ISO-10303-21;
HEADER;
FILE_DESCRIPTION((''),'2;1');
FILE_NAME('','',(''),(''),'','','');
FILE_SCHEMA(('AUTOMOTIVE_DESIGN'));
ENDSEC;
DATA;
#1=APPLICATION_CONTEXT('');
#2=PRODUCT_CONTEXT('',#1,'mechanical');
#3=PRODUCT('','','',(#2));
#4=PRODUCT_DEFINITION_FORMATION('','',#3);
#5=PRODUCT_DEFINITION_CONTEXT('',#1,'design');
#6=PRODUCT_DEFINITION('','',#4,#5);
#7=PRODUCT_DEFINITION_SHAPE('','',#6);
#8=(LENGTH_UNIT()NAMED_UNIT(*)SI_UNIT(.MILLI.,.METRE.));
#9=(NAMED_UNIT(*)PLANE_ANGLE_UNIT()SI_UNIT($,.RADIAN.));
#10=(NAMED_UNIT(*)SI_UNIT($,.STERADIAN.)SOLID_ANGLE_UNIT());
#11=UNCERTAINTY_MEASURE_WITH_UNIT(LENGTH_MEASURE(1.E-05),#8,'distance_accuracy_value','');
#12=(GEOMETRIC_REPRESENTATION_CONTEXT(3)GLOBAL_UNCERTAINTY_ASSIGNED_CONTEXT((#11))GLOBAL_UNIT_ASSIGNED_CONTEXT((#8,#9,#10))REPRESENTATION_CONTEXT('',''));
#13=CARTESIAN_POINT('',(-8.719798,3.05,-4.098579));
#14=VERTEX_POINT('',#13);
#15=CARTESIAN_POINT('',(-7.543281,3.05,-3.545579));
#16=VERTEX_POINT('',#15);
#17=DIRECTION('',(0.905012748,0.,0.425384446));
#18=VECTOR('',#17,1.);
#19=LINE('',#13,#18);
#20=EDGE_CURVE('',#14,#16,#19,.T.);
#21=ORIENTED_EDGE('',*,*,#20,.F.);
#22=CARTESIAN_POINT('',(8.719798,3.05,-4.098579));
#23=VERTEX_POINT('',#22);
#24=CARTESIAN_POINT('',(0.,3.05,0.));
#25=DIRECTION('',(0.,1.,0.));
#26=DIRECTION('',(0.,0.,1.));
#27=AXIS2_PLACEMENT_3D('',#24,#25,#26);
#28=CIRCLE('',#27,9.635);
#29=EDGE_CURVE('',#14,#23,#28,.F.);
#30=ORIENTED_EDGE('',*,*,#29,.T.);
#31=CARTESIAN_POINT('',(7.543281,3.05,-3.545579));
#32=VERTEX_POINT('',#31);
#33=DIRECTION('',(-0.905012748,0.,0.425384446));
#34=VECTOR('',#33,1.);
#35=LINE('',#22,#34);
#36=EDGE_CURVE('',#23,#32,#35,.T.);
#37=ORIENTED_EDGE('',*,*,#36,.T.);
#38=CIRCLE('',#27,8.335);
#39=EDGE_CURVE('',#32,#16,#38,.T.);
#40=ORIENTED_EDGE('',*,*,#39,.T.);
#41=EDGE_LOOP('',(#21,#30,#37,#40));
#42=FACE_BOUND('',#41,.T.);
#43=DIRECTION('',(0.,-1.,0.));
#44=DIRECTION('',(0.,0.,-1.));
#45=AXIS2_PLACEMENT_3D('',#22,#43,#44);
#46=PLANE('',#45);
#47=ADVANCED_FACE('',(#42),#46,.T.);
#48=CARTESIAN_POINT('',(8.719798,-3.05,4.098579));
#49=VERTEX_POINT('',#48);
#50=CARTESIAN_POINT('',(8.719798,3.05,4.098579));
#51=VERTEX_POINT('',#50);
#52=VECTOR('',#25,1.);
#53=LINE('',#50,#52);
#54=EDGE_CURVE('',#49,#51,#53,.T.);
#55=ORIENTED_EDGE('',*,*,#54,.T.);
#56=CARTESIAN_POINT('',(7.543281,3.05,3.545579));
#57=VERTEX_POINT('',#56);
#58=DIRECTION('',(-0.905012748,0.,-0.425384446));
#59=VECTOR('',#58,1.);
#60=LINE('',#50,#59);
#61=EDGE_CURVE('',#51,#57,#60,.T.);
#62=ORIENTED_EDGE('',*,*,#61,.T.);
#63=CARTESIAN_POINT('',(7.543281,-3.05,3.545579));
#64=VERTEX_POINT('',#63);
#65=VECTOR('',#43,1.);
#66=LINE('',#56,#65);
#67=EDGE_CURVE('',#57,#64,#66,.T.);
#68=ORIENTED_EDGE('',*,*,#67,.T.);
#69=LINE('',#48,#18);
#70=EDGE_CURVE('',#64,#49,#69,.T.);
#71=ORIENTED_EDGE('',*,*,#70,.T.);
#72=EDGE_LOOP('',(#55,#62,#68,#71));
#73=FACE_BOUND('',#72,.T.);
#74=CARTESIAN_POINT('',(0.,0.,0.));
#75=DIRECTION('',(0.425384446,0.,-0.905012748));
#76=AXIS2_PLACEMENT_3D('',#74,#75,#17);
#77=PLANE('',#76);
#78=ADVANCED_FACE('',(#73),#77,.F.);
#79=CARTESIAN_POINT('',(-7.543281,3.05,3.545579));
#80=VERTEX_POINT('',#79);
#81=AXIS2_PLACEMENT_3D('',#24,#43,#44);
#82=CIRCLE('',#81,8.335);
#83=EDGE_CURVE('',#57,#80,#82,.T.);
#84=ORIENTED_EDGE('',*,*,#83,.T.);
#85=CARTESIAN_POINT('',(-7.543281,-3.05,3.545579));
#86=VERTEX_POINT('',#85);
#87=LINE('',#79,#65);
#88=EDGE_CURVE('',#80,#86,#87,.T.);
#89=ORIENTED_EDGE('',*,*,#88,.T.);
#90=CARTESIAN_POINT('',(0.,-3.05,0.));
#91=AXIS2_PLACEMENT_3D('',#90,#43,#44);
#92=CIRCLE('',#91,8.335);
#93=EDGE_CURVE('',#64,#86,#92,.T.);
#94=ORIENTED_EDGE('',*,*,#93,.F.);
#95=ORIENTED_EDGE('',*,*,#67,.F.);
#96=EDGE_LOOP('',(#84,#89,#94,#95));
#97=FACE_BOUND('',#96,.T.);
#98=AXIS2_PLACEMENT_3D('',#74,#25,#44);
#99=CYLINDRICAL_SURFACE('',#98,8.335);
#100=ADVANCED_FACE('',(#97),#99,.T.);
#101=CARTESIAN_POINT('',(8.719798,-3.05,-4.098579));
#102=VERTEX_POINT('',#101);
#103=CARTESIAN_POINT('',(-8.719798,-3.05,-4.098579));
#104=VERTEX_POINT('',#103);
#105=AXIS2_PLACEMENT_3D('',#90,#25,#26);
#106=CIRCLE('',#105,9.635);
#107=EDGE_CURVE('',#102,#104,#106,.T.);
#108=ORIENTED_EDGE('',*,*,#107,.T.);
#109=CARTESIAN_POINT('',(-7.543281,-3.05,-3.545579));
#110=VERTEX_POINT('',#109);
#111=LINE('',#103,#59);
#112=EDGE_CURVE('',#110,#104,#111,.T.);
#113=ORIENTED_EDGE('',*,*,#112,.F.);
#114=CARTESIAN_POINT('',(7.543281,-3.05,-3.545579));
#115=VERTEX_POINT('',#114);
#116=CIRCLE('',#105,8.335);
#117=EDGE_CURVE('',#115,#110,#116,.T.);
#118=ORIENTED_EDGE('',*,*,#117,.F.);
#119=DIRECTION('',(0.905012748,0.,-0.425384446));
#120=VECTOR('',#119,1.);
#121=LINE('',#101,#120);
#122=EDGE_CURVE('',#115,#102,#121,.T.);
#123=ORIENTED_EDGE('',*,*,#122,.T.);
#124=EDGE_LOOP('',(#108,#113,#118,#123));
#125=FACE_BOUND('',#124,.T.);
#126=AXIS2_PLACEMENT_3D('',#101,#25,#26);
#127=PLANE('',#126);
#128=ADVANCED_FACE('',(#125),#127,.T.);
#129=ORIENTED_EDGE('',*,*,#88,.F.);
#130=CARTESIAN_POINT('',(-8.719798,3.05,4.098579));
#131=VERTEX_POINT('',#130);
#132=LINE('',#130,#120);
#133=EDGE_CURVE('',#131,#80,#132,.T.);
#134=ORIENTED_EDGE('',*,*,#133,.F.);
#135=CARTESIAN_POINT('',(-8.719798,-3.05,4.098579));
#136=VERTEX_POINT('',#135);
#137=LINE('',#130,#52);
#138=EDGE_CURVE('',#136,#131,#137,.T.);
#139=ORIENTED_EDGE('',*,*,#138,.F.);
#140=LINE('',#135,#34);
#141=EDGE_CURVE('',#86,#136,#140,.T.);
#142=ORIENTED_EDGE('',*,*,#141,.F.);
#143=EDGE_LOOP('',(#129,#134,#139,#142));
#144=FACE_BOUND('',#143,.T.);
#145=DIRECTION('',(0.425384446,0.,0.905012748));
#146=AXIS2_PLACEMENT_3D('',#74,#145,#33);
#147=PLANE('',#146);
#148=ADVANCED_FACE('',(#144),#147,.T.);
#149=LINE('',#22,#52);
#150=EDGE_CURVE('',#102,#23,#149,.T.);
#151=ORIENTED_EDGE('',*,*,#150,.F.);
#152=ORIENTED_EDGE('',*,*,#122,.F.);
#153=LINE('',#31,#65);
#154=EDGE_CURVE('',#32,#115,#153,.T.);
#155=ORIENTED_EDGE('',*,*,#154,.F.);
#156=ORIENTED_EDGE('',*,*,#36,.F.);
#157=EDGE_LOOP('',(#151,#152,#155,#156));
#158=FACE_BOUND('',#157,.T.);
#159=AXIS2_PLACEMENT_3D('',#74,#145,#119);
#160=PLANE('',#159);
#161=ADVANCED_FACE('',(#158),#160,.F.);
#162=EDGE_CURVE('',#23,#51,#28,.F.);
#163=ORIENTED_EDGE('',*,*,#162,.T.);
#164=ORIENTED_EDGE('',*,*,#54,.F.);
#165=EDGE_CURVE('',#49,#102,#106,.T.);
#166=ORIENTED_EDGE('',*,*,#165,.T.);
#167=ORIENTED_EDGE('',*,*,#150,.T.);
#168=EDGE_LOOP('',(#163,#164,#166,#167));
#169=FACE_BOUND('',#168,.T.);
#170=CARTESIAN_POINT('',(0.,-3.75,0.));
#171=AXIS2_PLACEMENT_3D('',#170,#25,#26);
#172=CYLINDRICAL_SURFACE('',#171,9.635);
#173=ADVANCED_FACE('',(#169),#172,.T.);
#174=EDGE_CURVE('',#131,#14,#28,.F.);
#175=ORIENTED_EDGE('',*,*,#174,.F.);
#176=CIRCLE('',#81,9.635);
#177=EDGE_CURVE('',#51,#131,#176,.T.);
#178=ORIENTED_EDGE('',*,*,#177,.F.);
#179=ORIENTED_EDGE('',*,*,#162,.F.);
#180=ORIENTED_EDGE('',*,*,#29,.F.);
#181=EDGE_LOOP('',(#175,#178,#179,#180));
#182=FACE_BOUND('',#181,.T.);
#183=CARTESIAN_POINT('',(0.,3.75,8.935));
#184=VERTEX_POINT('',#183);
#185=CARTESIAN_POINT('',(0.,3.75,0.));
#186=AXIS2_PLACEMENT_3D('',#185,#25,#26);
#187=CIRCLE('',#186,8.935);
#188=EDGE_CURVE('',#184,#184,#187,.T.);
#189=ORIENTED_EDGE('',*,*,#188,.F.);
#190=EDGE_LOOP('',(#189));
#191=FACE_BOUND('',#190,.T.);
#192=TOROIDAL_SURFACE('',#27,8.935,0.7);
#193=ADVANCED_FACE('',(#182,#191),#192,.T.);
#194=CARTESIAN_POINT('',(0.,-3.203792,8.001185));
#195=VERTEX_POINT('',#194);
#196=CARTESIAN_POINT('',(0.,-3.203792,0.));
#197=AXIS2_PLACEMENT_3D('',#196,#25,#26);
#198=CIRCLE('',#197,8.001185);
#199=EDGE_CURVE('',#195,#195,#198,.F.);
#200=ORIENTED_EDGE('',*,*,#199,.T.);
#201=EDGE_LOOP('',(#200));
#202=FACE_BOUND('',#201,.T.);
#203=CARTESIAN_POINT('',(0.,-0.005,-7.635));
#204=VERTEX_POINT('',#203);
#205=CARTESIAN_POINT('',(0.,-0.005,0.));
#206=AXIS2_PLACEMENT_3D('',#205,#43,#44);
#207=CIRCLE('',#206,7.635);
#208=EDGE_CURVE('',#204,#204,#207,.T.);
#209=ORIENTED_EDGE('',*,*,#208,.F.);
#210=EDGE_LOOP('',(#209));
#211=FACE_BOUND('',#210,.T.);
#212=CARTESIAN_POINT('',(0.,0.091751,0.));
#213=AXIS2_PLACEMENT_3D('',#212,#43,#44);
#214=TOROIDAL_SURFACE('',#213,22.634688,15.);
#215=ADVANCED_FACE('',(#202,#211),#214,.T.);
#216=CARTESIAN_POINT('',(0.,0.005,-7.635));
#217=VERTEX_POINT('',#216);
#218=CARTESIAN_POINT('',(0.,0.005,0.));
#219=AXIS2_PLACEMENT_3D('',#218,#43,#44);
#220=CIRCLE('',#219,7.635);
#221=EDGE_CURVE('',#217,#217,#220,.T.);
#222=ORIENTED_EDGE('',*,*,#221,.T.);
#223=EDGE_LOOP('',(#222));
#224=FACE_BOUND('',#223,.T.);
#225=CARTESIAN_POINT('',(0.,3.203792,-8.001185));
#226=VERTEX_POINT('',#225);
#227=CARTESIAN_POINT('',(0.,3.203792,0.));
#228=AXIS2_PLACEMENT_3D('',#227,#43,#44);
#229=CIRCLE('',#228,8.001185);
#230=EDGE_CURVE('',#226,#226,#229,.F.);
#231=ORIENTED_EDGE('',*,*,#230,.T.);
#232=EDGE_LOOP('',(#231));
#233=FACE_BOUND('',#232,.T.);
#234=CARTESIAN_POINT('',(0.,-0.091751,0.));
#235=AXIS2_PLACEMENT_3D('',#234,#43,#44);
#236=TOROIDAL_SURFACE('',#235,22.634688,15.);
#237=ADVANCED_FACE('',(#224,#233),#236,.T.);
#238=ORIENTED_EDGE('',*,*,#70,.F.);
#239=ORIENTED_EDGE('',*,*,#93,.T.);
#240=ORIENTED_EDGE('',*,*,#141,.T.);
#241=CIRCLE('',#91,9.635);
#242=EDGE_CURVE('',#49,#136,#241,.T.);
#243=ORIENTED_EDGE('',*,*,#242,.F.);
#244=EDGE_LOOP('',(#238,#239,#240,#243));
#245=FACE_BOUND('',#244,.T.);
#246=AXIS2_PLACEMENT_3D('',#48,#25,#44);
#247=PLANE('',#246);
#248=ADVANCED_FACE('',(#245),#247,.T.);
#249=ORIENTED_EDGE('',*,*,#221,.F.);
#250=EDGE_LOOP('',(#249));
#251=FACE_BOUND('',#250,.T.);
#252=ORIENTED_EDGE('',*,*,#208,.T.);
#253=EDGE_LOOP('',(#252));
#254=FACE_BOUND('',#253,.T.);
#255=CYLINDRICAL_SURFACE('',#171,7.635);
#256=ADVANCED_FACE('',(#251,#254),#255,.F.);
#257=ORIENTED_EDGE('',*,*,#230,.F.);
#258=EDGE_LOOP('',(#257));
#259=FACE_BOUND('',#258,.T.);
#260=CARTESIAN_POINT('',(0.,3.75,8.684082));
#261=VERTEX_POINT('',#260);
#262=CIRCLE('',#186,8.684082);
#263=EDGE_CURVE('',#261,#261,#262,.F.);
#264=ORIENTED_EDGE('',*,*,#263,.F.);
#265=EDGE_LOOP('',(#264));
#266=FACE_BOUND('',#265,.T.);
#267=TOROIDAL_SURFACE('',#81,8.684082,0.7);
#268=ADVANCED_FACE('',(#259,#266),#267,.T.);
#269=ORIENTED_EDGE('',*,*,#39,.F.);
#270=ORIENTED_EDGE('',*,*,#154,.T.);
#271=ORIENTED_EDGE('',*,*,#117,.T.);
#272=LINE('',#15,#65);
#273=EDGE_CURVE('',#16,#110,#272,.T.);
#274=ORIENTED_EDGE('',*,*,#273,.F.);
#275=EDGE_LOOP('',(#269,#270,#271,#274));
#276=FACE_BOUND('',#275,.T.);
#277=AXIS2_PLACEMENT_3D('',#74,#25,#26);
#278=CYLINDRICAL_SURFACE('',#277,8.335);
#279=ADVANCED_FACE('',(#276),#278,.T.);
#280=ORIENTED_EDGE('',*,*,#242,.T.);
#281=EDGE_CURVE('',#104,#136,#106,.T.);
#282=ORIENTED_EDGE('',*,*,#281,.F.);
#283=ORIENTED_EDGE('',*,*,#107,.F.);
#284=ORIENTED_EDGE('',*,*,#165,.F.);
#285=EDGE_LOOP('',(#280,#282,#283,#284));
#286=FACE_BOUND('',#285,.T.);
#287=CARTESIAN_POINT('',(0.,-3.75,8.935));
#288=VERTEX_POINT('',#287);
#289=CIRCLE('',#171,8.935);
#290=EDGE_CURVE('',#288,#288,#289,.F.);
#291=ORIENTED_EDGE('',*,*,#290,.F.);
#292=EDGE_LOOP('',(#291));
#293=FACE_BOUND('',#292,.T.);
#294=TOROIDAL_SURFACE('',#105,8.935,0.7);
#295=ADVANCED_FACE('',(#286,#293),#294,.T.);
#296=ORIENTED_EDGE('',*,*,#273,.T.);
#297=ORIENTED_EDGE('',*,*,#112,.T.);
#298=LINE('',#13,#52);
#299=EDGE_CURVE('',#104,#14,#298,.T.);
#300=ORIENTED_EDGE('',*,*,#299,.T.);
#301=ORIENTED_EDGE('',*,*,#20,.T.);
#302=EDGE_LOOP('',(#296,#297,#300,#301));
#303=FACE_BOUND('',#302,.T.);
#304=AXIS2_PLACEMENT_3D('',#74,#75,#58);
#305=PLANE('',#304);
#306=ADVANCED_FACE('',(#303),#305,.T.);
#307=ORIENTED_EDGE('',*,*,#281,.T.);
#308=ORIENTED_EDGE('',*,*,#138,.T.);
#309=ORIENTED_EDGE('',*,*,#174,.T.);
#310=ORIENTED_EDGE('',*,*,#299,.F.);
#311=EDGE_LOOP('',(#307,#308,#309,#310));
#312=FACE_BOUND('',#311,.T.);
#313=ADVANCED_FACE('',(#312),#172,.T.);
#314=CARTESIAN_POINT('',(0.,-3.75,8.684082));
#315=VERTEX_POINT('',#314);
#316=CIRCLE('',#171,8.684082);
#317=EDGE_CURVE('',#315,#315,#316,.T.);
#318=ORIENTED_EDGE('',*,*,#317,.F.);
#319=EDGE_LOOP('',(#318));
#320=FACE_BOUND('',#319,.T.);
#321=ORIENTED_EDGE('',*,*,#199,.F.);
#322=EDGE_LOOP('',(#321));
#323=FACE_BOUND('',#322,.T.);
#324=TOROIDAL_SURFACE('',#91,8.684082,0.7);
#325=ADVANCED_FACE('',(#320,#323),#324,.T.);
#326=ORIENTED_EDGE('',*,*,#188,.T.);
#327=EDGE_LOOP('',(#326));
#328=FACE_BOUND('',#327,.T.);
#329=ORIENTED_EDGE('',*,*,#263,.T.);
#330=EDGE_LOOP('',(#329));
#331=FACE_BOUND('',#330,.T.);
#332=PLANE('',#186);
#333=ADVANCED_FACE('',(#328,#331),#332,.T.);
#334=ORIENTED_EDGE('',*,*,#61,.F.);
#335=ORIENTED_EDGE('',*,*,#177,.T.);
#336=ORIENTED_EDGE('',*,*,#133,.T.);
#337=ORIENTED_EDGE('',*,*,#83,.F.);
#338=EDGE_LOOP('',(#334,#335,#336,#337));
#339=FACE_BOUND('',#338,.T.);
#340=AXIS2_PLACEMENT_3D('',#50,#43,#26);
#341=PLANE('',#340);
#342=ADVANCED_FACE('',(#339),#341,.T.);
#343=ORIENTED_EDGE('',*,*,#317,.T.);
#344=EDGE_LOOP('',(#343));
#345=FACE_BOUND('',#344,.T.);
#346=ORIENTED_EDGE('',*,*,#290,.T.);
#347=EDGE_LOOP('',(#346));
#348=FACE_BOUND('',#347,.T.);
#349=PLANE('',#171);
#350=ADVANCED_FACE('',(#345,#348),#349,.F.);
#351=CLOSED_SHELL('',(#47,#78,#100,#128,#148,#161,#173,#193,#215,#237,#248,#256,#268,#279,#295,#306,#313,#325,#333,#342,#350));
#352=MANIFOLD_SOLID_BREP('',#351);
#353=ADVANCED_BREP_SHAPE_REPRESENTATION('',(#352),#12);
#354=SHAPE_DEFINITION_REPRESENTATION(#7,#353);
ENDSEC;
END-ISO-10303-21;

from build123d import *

# Parameters (mm, degrees)
BOSS_EXTRUDE1_DEPTH      = 3.75
BOSS_EXTRUDE1_DEPTH_BACK = 3.75
SKETCH1_R                = 9.635
SKETCH1_R_2              = 7.635
FILLET1_R                = 0.7
FILLET3_R                = 0.7
CUT_REVOLVE2_START       = -3.05
CUT_REVOLVE2_DEPTH       = 6.1


# Read off the part's stored shape, not the designer's step: Cut-Revolve2
with BuildPart() as part:
    # Sketch1 → Boss-Extrude1 (new, two sides: drawn at the far end of the back side and taken through both)
    with BuildSketch(Plane(origin=(0, 0, 0), x_dir=(1, 0, 0), z_dir=(0, 1, 0)).offset(-BOSS_EXTRUDE1_DEPTH_BACK)):
        with Locations(Location((0, 0, 0), (0, 0, 270))):
            Circle(SKETCH1_R)
        with Locations(Location((0, 0, 0), (0, 0, 270))):
            Circle(SKETCH1_R_2, mode=Mode.SUBTRACT)
    extrude(amount=BOSS_EXTRUDE1_DEPTH + BOSS_EXTRUDE1_DEPTH_BACK)

    # Fillet1
    fillet1_edges = [part.edges().sort_by_distance(p)[0] for p in [
        (0, -3.75, -9.635),
        (0, 3.75, -9.635),
    ]]
    fillet(fillet1_edges, radius=FILLET1_R)

    # Sketch3 → Cut-Revolve1 (revolve, cut)
    with BuildSketch(Plane(origin=(0, 0, 0), x_dir=(0, 0, -1), z_dir=(1, 0, 0)), mode=Mode.PRIVATE) as cut_revolve1_sk:
        with BuildLine():
            Line((-7.635, 3.75), (-7.635, 0.005))
            ThreePointArc((-7.635, 0.005), (-7.766616425, 1.893305551), (-8.135, 3.75))
            Line((-8.135, 3.75), (-7.635, 3.75))
        make_face()
        with BuildLine():
            Line((-7.635, -3.75), (-8.135, -3.75))
            ThreePointArc((-8.135, -3.75), (-7.766616425, -1.893305551), (-7.635, -0.005))
            Line((-7.635, -0.005), (-7.635, -3.75))
        make_face()
    revolve(cut_revolve1_sk.sketch.rotate(Axis((0, 0, 0), (0, 1, 0)), 180), axis=Axis((0, 0, 0), (0, 1, 0)), mode=Mode.SUBTRACT)

    # Fillet3
    fillet3_edges = [part.edges().sort_by_distance(p)[0] for p in [
        (0, 3.75, 8.135),
        (0, -3.75, 8.135),
    ]]
    fillet(fillet3_edges, radius=FILLET3_R)

    # Cut-Revolve2 outline → Cut-Revolve2 (cut)
    with BuildSketch(Plane(origin=(0, 0, 0), x_dir=(1, 0, 0), z_dir=(0, 1, 0)).offset(CUT_REVOLVE2_START)):
        with BuildLine():
            ThreePointArc((-7.543281251, 3.545579355), (0, 8.335), (7.543281251, 3.545579355))
            Line((7.543281251, 3.545579355), (8.719797823, 4.098579135))
            ThreePointArc((8.719797823, 4.098579135), (0, 9.635), (-8.719797823, 4.098579135))
            Line((-8.719797823, 4.098579135), (-7.543281251, 3.545579355))
        make_face()
    cut_revolve2 = extrude(amount=CUT_REVOLVE2_DEPTH, mode=Mode.SUBTRACT)

    # Mirror3: Cut-Revolve2 across plane
    add(cut_revolve2.mirror(Plane.XY), mode=Mode.SUBTRACT)


solid = part.part
